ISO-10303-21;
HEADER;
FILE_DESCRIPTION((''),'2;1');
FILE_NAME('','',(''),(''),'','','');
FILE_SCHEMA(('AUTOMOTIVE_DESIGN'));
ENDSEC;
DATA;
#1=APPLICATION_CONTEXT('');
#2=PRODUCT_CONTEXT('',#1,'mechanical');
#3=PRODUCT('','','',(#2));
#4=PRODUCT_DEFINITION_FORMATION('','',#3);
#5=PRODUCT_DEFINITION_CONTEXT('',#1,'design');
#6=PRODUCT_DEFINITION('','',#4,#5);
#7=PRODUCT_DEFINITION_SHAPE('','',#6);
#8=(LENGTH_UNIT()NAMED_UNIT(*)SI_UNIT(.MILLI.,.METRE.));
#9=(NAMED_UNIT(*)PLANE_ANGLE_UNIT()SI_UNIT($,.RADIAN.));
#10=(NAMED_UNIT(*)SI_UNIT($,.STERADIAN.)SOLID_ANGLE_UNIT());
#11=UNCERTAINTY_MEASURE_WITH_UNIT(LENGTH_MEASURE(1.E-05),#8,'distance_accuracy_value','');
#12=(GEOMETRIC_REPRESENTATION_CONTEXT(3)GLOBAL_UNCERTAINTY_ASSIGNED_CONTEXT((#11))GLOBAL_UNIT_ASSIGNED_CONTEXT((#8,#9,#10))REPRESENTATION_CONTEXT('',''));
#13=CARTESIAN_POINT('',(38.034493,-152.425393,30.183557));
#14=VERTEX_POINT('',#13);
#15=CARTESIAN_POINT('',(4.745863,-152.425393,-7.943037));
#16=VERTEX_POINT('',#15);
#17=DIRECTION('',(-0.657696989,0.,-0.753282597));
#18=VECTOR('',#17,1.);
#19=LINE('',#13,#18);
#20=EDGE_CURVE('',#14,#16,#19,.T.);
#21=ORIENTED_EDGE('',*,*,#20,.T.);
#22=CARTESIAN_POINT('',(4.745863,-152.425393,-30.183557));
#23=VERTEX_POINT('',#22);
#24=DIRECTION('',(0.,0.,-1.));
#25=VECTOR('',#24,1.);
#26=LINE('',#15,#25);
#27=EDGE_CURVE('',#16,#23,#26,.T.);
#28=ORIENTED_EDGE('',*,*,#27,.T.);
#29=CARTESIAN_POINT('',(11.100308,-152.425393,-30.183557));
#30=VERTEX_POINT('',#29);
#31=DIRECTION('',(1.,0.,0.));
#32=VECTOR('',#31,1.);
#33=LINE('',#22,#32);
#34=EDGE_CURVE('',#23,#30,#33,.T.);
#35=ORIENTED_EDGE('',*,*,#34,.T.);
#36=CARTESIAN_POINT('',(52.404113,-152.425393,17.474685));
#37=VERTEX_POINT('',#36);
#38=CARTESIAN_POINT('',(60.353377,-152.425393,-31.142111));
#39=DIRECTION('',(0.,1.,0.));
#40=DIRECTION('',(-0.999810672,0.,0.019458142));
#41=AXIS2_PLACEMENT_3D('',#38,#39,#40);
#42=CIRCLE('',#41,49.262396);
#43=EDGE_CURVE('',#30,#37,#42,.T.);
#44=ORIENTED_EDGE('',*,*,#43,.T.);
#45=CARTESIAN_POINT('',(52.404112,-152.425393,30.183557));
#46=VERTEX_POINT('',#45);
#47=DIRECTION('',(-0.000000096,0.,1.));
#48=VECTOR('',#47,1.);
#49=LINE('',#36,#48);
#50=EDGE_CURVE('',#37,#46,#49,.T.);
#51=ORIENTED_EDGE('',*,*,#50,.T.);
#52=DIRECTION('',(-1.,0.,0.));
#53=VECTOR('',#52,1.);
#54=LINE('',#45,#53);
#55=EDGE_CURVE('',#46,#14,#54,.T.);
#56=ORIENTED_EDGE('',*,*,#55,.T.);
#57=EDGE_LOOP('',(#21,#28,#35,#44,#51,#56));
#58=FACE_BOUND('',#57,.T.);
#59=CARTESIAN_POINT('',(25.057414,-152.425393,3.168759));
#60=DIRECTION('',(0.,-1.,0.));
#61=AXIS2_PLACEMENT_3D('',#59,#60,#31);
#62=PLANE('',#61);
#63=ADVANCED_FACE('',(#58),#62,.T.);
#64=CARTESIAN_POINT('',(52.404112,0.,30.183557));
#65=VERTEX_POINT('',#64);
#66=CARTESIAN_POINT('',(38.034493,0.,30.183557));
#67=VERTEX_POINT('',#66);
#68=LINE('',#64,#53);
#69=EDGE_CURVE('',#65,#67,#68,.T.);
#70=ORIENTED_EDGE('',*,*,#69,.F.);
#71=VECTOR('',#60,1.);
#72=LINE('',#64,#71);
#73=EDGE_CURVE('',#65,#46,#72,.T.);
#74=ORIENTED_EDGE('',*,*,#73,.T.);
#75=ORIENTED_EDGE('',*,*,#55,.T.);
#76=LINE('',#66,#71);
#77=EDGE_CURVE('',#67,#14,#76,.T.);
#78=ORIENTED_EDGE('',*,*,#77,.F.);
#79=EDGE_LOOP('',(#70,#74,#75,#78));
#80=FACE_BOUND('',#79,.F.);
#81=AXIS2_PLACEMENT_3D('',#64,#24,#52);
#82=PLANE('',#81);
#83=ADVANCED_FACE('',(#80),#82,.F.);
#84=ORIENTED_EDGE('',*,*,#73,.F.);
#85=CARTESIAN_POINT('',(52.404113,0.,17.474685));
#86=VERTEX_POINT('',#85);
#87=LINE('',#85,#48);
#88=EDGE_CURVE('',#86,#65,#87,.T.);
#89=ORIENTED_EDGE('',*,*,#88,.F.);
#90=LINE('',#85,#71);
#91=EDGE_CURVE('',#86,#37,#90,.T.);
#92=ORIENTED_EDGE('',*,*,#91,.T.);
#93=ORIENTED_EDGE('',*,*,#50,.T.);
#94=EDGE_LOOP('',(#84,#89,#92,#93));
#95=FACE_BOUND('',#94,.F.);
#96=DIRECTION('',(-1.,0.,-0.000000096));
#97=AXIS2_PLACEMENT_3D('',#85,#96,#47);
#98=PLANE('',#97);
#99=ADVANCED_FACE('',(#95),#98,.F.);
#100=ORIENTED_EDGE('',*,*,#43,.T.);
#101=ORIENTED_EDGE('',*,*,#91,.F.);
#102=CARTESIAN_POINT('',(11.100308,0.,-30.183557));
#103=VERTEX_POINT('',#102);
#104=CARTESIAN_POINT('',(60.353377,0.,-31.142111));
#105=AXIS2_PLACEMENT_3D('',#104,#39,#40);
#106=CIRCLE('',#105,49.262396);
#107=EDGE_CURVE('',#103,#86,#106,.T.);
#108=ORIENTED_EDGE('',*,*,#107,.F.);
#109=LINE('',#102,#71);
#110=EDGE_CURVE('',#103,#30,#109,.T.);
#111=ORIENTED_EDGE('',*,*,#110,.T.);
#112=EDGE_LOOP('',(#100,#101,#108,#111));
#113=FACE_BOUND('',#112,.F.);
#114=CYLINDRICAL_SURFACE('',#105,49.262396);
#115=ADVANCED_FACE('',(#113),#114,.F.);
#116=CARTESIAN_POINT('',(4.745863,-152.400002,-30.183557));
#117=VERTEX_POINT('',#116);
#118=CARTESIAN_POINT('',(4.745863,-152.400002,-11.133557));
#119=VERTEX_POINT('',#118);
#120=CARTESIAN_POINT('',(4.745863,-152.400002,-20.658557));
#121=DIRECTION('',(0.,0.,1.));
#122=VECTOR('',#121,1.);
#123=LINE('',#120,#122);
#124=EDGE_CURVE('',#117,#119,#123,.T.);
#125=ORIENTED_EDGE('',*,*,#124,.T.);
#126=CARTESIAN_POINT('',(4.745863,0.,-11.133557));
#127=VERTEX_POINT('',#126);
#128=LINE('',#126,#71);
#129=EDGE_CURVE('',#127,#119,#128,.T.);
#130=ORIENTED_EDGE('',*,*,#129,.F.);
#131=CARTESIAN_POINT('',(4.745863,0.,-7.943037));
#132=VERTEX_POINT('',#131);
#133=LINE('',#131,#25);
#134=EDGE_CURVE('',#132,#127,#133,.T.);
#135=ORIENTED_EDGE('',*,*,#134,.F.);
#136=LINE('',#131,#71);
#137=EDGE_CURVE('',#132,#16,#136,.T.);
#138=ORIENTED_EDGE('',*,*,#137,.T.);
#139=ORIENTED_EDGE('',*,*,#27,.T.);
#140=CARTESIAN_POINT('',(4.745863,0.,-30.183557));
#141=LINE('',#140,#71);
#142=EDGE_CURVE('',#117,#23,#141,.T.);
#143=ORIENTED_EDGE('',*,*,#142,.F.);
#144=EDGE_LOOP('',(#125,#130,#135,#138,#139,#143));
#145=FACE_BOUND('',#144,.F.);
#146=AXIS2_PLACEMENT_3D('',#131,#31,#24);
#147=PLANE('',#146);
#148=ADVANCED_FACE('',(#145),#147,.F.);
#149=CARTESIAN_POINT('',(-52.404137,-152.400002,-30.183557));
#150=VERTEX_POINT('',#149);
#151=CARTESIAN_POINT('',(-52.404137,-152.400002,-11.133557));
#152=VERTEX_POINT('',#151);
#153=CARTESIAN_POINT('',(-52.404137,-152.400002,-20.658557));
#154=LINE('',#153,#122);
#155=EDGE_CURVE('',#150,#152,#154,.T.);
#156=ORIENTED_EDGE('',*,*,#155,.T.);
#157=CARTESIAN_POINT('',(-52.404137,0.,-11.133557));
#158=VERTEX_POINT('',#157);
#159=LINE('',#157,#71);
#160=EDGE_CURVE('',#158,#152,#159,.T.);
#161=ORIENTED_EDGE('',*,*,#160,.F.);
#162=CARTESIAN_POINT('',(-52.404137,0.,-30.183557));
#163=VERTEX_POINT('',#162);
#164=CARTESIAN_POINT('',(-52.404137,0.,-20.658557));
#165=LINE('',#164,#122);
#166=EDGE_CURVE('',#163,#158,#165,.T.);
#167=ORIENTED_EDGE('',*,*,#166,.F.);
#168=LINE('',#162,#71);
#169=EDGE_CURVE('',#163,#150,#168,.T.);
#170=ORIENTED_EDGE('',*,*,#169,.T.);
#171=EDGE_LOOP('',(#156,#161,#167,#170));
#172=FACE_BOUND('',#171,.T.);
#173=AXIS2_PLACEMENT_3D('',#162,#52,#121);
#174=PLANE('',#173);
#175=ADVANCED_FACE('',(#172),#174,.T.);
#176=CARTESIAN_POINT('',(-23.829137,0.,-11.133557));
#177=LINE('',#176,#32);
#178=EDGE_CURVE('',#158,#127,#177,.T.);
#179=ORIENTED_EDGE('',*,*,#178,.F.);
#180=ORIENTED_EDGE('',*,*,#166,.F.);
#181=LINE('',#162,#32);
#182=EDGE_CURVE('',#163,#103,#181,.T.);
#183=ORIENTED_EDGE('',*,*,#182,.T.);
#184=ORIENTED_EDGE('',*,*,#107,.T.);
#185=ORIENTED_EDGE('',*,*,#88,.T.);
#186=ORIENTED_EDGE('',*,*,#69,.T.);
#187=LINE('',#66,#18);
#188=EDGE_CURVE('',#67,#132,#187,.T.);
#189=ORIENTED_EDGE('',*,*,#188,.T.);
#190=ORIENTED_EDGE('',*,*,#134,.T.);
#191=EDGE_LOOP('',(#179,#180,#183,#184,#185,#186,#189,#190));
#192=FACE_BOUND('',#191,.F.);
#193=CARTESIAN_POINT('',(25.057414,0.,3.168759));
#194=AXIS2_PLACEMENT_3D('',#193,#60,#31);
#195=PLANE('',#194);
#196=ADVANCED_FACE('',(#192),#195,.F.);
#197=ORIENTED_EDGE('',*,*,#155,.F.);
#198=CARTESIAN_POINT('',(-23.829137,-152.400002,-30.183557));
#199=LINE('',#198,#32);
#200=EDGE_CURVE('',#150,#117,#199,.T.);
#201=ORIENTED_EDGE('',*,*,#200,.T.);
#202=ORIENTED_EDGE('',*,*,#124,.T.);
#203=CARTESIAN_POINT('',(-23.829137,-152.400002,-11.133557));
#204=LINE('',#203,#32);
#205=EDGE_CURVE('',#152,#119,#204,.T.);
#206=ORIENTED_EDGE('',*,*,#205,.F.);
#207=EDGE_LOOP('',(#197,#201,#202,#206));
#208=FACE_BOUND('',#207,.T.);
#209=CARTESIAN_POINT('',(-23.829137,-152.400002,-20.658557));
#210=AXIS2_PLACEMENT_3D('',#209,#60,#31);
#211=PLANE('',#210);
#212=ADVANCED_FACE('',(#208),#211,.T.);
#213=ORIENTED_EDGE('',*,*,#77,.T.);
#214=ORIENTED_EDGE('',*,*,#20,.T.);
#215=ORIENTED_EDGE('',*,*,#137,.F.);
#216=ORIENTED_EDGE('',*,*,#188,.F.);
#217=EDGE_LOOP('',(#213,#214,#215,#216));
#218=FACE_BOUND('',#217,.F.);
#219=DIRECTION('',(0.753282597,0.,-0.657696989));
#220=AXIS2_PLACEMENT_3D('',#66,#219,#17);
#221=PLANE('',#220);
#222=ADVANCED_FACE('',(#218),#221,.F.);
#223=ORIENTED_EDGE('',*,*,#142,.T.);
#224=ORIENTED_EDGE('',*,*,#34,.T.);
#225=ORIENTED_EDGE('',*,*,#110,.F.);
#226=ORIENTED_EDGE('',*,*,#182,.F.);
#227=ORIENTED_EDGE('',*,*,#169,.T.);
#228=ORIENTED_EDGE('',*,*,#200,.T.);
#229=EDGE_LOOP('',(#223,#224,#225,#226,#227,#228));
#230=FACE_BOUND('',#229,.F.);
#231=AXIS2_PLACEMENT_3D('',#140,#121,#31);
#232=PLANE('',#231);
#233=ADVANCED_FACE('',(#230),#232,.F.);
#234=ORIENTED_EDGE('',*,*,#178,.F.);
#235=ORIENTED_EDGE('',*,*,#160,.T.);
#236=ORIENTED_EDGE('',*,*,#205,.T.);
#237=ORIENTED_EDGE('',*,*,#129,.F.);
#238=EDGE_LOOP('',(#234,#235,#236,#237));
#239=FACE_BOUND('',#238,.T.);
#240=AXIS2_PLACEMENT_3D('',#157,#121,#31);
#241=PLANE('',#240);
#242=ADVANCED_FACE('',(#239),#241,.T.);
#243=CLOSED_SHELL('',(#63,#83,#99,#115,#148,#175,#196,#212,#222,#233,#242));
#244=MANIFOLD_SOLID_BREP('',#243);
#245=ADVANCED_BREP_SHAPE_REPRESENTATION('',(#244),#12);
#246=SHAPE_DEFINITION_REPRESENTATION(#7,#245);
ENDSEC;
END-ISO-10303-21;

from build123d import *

# Parameters (mm, degrees)
F0_W     = 57.15
F0_H     = 19.05
F1_DEPTH = 152.4000018835
F2_DEPTH = 152.4253934622


# Not quite as in the source:
# - ends of sketch curves that miss each other by under 0.0002 mm in the source are joined


with BuildPart() as f1:
    # F0 (on Front) → F1 (new body)
    with BuildSketch(Plane.XZ):
        with Locations((-23.829137, -20.6585566)):
            Rectangle(F0_W, F0_H)
    extrude(amount=F1_DEPTH)

    # F0 (on Front) → F2 (join)
    with BuildSketch(Plane.XZ):
        with BuildLine():
            Line((4.745863, -11.1335566), (4.745863, -30.1835566))
            Line((4.745863, -30.1835566), (11.100308, -30.1835566))
            ThreePointArc((11.100308, -30.1835566), (23.1263213226, 1.121334901), (52.4041128155, 17.4746845664))
            Line((52.4041128155, 17.4746845664), (52.4041116, 30.1835566))
            Line((52.4041116, 30.1835566), (38.0344934, 30.1835566))
            Line((38.0344934, 30.1835566), (4.745863, -7.9430372))
            Line((4.745863, -7.9430372), (4.745863, -11.1335566))
        make_face()
    extrude(amount=F2_DEPTH)


solid = f1.part
